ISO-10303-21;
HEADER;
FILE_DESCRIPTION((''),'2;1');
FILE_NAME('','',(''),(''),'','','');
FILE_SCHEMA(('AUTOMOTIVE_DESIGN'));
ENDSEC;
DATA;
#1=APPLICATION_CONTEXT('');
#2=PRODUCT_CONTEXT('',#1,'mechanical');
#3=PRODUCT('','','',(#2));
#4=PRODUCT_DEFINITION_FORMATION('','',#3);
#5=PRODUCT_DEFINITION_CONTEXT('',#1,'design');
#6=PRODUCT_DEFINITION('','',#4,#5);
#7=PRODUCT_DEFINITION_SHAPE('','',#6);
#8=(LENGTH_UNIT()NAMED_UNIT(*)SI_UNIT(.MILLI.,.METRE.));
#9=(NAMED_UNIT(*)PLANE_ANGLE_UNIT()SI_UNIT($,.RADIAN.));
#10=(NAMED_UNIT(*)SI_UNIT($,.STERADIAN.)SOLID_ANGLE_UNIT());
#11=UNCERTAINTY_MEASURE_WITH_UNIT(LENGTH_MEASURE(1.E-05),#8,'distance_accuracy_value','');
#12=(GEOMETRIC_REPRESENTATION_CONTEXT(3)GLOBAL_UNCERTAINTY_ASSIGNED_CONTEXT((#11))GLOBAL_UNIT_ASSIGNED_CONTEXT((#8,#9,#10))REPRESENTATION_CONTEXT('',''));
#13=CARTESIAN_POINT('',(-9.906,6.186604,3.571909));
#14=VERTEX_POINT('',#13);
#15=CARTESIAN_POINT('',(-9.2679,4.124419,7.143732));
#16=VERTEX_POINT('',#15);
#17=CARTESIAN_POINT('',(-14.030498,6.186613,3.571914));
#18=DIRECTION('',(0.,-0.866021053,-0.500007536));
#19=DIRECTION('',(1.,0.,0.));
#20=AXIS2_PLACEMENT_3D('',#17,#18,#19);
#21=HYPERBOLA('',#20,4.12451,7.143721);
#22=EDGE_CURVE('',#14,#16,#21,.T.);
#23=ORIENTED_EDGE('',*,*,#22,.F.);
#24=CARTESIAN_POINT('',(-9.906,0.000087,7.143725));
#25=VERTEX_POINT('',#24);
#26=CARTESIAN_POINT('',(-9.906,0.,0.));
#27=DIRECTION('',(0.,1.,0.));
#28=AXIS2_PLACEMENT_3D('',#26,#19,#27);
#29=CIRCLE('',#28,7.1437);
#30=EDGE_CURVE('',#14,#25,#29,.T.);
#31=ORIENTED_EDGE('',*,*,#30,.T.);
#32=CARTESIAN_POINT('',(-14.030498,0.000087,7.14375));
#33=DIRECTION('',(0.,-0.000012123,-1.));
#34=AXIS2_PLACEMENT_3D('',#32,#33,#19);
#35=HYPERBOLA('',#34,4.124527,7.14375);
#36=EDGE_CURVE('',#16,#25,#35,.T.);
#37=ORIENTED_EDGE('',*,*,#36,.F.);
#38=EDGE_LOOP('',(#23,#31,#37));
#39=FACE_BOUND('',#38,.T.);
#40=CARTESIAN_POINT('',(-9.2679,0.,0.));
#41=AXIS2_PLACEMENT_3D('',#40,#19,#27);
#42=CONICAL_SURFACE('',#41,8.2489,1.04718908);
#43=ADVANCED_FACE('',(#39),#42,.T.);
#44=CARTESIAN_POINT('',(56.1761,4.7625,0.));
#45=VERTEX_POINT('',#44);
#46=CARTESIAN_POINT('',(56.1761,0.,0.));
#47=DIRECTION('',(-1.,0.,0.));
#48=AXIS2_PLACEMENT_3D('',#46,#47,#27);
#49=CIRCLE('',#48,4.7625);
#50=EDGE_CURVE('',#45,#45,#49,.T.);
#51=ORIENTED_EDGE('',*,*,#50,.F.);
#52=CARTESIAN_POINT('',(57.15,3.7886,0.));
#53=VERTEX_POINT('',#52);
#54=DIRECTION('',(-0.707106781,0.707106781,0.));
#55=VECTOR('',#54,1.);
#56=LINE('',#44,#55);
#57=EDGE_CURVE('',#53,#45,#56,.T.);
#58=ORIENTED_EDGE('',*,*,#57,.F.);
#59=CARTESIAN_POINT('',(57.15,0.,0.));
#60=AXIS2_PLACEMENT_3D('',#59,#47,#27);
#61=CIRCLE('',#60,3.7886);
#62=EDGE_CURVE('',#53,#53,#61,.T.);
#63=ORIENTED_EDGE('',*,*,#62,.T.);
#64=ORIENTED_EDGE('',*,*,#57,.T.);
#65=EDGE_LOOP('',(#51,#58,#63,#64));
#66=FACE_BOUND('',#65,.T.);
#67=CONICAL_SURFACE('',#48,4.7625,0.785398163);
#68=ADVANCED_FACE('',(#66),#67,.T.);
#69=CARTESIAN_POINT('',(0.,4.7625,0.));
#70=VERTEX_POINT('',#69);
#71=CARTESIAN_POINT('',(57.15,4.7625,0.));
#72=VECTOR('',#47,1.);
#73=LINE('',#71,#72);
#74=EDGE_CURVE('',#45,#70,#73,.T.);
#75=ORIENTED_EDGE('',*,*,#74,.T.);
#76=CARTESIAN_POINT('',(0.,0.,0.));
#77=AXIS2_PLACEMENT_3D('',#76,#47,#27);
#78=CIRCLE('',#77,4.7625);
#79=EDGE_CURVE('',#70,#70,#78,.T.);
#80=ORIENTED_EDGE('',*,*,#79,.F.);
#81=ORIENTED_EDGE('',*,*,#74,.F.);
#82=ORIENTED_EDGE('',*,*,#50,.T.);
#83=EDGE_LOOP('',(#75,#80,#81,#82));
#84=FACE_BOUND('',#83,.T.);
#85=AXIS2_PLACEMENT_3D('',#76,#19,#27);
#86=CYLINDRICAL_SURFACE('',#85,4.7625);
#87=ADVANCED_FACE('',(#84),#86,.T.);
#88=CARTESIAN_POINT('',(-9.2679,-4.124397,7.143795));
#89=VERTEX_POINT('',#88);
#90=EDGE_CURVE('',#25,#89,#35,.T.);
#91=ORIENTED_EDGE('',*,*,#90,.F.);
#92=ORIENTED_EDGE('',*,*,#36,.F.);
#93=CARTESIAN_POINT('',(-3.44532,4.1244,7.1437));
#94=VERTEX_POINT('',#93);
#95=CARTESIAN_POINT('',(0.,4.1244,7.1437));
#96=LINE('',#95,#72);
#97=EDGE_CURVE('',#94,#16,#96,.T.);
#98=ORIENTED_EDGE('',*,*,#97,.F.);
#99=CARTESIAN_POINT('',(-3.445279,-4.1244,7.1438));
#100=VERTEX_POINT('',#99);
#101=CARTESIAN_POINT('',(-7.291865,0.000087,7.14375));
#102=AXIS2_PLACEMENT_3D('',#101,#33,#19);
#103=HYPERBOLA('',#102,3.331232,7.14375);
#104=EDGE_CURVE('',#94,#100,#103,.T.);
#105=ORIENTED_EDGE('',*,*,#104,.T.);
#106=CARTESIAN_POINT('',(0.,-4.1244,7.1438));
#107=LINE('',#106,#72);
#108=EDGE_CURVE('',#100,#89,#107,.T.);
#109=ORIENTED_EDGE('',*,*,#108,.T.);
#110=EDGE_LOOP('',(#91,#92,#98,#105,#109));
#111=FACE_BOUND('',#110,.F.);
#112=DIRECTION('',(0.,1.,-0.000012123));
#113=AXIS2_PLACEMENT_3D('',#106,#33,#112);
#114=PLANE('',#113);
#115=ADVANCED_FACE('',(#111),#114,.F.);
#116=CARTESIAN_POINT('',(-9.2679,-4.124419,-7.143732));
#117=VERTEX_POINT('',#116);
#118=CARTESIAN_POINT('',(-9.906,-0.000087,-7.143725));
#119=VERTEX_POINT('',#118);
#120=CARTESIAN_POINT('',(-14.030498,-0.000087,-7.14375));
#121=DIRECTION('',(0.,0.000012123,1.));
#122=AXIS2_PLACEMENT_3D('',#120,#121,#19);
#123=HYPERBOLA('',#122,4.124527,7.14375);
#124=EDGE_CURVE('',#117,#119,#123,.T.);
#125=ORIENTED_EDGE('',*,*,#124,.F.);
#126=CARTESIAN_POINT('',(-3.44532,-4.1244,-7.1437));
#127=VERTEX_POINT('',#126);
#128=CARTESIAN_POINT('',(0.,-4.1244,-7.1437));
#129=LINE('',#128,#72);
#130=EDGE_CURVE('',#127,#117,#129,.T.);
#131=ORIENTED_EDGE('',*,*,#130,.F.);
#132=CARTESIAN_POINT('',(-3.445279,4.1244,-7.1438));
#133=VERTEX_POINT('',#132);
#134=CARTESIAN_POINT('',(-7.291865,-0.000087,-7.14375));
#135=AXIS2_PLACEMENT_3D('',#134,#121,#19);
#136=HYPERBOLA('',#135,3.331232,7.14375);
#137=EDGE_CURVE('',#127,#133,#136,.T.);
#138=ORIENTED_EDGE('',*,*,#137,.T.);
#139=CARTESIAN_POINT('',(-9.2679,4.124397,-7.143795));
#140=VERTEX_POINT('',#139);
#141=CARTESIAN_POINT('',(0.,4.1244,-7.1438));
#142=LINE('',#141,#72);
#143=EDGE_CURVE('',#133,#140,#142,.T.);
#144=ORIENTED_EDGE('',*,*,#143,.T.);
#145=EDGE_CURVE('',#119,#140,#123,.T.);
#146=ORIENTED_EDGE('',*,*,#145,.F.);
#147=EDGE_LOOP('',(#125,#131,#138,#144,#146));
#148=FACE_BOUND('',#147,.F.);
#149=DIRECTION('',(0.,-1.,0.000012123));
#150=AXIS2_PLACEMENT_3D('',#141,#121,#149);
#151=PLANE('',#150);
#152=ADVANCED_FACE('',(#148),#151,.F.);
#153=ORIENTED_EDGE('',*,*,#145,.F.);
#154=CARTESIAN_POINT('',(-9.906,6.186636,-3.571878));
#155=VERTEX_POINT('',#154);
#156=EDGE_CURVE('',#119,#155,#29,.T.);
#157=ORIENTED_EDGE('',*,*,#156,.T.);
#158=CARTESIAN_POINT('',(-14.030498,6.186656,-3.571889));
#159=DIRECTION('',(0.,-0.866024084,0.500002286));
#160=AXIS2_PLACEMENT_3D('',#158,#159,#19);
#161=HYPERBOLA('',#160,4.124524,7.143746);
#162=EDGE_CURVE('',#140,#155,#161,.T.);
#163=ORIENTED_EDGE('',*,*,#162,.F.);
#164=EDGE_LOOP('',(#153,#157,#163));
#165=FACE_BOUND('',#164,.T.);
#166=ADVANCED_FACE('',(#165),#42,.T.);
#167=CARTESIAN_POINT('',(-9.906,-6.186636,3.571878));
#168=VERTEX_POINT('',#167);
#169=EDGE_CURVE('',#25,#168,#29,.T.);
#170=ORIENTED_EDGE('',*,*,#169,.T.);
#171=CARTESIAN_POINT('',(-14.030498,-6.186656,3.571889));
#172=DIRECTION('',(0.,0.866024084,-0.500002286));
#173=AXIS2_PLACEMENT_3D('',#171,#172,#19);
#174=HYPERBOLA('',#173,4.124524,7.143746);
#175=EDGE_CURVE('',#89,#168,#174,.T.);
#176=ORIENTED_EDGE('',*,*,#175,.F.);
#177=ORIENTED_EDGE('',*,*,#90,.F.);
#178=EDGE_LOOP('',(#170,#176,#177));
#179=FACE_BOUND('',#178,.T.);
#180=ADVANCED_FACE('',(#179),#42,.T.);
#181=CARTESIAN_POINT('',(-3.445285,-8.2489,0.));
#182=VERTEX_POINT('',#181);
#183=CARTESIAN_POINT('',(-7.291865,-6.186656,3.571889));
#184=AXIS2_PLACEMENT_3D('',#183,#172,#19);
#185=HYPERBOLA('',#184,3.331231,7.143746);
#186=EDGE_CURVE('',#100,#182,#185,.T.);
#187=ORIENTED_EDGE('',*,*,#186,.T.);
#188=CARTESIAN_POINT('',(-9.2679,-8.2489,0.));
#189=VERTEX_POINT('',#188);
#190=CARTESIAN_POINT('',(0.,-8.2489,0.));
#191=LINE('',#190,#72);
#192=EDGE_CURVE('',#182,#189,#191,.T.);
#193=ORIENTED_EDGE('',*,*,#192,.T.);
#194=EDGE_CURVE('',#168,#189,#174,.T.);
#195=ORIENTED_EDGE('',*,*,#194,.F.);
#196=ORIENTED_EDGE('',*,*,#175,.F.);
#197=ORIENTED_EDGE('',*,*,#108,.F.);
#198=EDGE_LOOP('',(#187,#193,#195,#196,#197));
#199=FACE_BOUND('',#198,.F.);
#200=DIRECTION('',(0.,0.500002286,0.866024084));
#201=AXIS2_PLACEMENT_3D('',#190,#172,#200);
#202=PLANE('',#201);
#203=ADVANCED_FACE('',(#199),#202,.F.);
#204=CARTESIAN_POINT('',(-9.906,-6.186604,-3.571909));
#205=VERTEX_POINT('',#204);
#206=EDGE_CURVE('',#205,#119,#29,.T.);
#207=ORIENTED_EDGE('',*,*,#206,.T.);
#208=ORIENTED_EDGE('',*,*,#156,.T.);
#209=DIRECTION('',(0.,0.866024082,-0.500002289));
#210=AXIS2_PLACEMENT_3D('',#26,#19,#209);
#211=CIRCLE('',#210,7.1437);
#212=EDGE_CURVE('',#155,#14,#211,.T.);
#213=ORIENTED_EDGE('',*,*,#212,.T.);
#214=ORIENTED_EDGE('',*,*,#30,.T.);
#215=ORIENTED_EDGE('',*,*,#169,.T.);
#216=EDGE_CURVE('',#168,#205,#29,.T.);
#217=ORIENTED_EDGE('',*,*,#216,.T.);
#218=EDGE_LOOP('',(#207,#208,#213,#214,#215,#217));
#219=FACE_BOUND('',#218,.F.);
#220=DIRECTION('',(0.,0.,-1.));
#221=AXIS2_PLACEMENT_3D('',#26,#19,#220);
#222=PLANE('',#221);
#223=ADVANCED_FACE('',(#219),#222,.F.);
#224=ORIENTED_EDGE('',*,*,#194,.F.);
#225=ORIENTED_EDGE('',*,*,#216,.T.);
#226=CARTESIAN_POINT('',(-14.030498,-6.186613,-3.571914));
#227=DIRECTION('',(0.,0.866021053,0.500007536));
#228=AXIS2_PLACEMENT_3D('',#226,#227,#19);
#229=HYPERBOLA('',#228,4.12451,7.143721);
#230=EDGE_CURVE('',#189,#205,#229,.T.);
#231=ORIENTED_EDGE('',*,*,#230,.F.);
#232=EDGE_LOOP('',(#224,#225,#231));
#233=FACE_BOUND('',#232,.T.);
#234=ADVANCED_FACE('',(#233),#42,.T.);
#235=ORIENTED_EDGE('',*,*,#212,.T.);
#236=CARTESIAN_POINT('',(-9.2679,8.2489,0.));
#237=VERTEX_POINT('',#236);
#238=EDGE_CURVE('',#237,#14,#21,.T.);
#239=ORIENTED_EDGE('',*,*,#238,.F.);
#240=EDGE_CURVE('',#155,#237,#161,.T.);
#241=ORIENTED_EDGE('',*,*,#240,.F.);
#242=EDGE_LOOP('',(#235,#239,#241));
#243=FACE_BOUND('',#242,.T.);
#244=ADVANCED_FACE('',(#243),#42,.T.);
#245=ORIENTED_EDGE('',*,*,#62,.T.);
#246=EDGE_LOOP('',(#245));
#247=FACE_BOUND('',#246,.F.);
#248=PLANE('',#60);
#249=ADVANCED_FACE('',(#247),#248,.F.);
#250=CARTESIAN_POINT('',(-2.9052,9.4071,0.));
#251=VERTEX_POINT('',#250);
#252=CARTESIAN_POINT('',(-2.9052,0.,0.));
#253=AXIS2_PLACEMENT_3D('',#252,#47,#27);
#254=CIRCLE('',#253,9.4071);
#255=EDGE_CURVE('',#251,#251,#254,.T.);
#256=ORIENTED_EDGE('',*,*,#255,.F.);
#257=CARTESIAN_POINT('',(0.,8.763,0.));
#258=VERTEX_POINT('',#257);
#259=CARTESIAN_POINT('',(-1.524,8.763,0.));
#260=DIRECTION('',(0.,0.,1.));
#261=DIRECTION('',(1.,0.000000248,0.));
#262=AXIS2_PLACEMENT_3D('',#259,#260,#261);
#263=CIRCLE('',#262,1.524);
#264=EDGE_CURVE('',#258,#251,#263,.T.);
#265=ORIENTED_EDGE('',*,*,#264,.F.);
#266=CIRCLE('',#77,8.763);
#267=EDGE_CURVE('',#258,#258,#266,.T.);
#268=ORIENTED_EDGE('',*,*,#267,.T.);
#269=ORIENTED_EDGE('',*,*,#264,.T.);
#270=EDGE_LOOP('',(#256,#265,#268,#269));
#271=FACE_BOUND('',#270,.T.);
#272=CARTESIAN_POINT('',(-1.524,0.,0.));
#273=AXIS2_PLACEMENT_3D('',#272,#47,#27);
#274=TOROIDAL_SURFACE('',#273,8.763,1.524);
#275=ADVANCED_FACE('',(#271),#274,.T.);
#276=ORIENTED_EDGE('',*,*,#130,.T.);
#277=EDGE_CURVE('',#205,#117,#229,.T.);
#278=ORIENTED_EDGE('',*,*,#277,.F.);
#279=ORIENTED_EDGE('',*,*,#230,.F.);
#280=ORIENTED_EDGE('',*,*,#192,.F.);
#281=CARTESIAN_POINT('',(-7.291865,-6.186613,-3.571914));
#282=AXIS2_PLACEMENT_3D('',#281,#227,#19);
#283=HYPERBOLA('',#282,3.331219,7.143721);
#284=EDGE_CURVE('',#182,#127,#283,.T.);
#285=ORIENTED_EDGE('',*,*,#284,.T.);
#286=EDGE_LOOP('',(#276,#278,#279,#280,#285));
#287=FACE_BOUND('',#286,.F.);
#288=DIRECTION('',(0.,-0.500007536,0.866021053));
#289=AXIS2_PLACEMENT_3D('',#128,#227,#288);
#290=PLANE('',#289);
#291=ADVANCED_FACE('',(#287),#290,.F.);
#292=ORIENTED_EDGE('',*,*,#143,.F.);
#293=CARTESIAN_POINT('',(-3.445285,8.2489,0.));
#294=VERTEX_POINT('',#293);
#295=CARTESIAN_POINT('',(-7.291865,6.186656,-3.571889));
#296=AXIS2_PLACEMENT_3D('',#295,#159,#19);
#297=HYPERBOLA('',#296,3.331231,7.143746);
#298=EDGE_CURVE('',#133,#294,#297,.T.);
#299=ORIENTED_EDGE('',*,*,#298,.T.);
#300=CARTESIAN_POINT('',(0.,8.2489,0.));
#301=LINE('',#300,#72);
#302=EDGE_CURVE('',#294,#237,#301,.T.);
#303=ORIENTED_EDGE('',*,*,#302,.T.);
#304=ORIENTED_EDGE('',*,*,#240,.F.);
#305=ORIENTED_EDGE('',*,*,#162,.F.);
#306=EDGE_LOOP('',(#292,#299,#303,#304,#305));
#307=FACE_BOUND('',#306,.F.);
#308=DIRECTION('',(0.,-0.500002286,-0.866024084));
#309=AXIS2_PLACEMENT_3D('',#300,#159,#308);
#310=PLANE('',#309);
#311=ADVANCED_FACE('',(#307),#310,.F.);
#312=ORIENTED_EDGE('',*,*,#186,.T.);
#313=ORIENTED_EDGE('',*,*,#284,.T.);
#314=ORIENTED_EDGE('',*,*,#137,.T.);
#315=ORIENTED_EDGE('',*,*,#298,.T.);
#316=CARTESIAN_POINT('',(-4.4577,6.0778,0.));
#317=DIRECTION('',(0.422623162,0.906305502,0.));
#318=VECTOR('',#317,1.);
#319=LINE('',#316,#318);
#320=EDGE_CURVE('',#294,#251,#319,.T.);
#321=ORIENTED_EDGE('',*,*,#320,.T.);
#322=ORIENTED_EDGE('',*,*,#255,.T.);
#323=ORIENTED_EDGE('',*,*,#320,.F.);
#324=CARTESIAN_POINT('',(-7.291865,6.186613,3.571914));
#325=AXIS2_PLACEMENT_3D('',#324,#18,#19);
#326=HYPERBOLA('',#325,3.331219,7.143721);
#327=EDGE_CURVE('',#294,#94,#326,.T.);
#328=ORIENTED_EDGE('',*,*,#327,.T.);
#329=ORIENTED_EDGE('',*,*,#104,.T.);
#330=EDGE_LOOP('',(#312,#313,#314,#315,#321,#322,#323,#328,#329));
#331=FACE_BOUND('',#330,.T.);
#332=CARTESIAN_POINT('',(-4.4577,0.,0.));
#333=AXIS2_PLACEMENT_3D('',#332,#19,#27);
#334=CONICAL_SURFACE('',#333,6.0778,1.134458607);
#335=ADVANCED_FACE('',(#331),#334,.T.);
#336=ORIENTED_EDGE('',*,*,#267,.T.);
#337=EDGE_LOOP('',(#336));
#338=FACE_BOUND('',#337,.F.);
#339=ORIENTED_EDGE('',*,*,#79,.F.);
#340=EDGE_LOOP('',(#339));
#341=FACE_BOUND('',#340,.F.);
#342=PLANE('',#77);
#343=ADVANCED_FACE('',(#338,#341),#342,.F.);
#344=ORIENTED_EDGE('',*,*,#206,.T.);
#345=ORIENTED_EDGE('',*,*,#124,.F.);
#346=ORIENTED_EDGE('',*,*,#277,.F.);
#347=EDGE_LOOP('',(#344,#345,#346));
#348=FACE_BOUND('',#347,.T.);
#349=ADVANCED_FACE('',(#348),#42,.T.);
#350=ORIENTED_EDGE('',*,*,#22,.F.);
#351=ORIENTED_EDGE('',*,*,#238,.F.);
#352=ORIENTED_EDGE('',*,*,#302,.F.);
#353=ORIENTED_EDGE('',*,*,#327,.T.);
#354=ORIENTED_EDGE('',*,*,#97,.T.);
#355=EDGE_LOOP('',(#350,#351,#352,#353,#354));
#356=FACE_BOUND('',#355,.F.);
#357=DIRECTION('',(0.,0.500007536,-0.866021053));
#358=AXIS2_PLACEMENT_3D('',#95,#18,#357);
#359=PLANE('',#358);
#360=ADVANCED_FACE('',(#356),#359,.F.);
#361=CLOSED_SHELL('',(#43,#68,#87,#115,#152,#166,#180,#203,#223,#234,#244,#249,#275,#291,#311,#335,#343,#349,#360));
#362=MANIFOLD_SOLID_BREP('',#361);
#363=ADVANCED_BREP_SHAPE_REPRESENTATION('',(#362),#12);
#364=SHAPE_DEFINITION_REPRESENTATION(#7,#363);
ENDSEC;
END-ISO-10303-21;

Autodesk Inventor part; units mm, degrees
ref_plane "YZ Plane" through (0, 0, 0) normal (1, 0, 0) x (0, 1, 0)
ref_plane "XZ Plane" through (0, 0, 0) normal (0, 1, 0) x (-1, 0, 0)
sketch "Sketch1" plane through (0, 0, 0) normal (0, 0, 1) x (1, 0, 0)
  line L0 (-4.4577, 0) -> (-4.4577, 6.0778)
  line L1 (0, 8.763) -> (0, 4.7625)
  line L2 (31.75, 4.7625) -> (57.15, 4.7625)
  line L3 (57.15, 4.7625) -> (57.15, 0)
  line L4 (57.15, 0) -> (-4.4577, 0)
  arc A0 (0, 8.763) -> (-2.9052, 9.4071) centre (-1.524, 8.763) ccw
  line L5 (0, -2.1146) -> (0, 12.6875) projected
  line L6 (-16.7792, 0) -> (69.4715, 0) projected
  line L7 (0, 4.7625) -> (0.0001, 4.7625)
  line L8 (0.0001, 4.7625) -> (0.0001, 4.7625)
  line L9 (0.0001, 4.7625) -> (20.6248, 4.7625)
  line L10 (20.6248, 4.7625) -> (31.75, 4.7625)
  line L11 (-4.4577, 6.0778) -> (-2.9052, 9.4071)
  line L12 (0.0001, 4.7625) -> (31.75, 4.7625) construction
  line L13 (31.75, 4.7625) -> (31.75, 0) construction
  dimension "d0" = 1.524
  dimension "d1" = 57.15
  dimension "d2" = 25.4
  dimension "d3" = 20.574
  dimension "d4" = 9.525
  dimension "d5" = 4.4577
  dimension "d15" = 9.525
  dimension "d16" = 9.525
  dimension "d17" = 0.0001
  dimension "d18" = 11.1252
  dimension "d19" = 25
revolve "Body" add sketch "Sketch1" angle 360 about axis through (57.15, 0, 0) along (-1, 0, 0)
sketch "Sketch2" plane through (0, 0, 0) normal (1, 0, 0) x (0, 0, -1)
  line L0 (7.1438, 4.1244) -> (7.1437, -4.1244)
  line L1 (7.1437, -4.1244) -> (0, -8.2489)
  line L2 (0, -8.2489) -> (-7.1438, -4.1244)
  line L3 (-7.1438, -4.1244) -> (-7.1437, 4.1244)
  line L4 (-7.1437, 4.1244) -> (0, 8.2489)
  line L5 (0, 8.2489) -> (7.1438, 4.1244)
  point P0 (0, 0)
  point P1 (0, 0)
  dimension "d23" = 14.2875
extrude "Head" add sketch "Sketch2" against normal blind 9.906
sketch "Sketch3" plane through (0, 0, 0) normal (0, 0, 1) x (1, 0, 0)
  line L0 (-9.906, 7.1437) -> (-9.906, 8.2489)
  line L1 (-9.906, 8.2489) -> (-9.2679, 8.2489)
  line L2 (-9.2679, 8.2489) -> (-9.906, 7.1437)
  line L3 (-11.1981, 0) -> (-2.1531, 0) projected
  line L4 (-9.906, 8.2489) -> (-9.906, 4.1244) projected
  line L5 (-3.4453, 8.2489) -> (-9.906, 8.2489) projected
  point P0 (-9.906, 4.1244)
  dimension "d8" = 30
  dimension "d22" = 14.2875
revolve "Chamfer1" cut sketch "Sketch3" angle 360 about axis through (-10, 0, 0) along (1, 0, 0)
thread "Thread" size "3/8-16 UNC" class "2A" standard "ANSI Unified Screw Threads" length 25.4
chamfer "Chamfer2" distance 0.9739 distance2 0.9739 1 edges at (57.15, -4.7625, 0) measured on face at (57.15, 0.5629, 1.4843)
ref_plane "Work Plane1" through (10.95, 0, 0) normal (0, 0, -1) x (1, 0, 0)
equation "\"d23\" = SW"
equation "\"d6\" = KOH"
equation "\"d10\" = GEL"
equation "\"d13\" = -0.5 * SPD + 0.5 * GD"
equation "\"d14\" = GUL"
equation "\"d0\" = PHH"
equation "\"d1\" = NLG"
equation "\"d2\" = GEL"
equation "\"d3\" = LADI"
equation "\"d4\" = GD"
equation "\"d5\" = 0.45 * KOH"
equation "\"d15\" = SD2"
equation "\"d16\" = BDM"
equation "\"d18\" = GAL"
equation "\"d19\" = KEWI"
equation "\"d8\" = ANG1"
equation "\"d22\" = SW0"
equation "\"NLG\" = 57.15"
equation "\"GD\" = NND"
equation "\"BDM\" = NND"
equation "\"KOH\" = 9.906"
equation "\"GEL\" = 25.4"
equation "\"LADI\" = 20.574"
equation "\"SW\" = 14.2875"
equation "\"PHH\" = 1.524"
equation "\"SW0\" = SW"
equation "\"SPD\" = 7.5773"
equation "\"SD2\" = NND"
equation "\"SD\" = 0"
equation "\"ANG1\" = 30deg"
equation "\"KEWI\" = 25deg"
equation "\"GAL\" = 11.1252"
equation "\"GUL\" = 0.97385"
equation "\"THREADDIA\" = 9.525"
equation "\"SDH\" = SW"
equation "\"TOA\" = 30deg"
equation "\"NND\" = 9.525"
equation "\"E0\" = 1.155 * SW"
equation "\"GD1\" = 7.5773"
properties part number "92979A186" material "Steel, Mild"
